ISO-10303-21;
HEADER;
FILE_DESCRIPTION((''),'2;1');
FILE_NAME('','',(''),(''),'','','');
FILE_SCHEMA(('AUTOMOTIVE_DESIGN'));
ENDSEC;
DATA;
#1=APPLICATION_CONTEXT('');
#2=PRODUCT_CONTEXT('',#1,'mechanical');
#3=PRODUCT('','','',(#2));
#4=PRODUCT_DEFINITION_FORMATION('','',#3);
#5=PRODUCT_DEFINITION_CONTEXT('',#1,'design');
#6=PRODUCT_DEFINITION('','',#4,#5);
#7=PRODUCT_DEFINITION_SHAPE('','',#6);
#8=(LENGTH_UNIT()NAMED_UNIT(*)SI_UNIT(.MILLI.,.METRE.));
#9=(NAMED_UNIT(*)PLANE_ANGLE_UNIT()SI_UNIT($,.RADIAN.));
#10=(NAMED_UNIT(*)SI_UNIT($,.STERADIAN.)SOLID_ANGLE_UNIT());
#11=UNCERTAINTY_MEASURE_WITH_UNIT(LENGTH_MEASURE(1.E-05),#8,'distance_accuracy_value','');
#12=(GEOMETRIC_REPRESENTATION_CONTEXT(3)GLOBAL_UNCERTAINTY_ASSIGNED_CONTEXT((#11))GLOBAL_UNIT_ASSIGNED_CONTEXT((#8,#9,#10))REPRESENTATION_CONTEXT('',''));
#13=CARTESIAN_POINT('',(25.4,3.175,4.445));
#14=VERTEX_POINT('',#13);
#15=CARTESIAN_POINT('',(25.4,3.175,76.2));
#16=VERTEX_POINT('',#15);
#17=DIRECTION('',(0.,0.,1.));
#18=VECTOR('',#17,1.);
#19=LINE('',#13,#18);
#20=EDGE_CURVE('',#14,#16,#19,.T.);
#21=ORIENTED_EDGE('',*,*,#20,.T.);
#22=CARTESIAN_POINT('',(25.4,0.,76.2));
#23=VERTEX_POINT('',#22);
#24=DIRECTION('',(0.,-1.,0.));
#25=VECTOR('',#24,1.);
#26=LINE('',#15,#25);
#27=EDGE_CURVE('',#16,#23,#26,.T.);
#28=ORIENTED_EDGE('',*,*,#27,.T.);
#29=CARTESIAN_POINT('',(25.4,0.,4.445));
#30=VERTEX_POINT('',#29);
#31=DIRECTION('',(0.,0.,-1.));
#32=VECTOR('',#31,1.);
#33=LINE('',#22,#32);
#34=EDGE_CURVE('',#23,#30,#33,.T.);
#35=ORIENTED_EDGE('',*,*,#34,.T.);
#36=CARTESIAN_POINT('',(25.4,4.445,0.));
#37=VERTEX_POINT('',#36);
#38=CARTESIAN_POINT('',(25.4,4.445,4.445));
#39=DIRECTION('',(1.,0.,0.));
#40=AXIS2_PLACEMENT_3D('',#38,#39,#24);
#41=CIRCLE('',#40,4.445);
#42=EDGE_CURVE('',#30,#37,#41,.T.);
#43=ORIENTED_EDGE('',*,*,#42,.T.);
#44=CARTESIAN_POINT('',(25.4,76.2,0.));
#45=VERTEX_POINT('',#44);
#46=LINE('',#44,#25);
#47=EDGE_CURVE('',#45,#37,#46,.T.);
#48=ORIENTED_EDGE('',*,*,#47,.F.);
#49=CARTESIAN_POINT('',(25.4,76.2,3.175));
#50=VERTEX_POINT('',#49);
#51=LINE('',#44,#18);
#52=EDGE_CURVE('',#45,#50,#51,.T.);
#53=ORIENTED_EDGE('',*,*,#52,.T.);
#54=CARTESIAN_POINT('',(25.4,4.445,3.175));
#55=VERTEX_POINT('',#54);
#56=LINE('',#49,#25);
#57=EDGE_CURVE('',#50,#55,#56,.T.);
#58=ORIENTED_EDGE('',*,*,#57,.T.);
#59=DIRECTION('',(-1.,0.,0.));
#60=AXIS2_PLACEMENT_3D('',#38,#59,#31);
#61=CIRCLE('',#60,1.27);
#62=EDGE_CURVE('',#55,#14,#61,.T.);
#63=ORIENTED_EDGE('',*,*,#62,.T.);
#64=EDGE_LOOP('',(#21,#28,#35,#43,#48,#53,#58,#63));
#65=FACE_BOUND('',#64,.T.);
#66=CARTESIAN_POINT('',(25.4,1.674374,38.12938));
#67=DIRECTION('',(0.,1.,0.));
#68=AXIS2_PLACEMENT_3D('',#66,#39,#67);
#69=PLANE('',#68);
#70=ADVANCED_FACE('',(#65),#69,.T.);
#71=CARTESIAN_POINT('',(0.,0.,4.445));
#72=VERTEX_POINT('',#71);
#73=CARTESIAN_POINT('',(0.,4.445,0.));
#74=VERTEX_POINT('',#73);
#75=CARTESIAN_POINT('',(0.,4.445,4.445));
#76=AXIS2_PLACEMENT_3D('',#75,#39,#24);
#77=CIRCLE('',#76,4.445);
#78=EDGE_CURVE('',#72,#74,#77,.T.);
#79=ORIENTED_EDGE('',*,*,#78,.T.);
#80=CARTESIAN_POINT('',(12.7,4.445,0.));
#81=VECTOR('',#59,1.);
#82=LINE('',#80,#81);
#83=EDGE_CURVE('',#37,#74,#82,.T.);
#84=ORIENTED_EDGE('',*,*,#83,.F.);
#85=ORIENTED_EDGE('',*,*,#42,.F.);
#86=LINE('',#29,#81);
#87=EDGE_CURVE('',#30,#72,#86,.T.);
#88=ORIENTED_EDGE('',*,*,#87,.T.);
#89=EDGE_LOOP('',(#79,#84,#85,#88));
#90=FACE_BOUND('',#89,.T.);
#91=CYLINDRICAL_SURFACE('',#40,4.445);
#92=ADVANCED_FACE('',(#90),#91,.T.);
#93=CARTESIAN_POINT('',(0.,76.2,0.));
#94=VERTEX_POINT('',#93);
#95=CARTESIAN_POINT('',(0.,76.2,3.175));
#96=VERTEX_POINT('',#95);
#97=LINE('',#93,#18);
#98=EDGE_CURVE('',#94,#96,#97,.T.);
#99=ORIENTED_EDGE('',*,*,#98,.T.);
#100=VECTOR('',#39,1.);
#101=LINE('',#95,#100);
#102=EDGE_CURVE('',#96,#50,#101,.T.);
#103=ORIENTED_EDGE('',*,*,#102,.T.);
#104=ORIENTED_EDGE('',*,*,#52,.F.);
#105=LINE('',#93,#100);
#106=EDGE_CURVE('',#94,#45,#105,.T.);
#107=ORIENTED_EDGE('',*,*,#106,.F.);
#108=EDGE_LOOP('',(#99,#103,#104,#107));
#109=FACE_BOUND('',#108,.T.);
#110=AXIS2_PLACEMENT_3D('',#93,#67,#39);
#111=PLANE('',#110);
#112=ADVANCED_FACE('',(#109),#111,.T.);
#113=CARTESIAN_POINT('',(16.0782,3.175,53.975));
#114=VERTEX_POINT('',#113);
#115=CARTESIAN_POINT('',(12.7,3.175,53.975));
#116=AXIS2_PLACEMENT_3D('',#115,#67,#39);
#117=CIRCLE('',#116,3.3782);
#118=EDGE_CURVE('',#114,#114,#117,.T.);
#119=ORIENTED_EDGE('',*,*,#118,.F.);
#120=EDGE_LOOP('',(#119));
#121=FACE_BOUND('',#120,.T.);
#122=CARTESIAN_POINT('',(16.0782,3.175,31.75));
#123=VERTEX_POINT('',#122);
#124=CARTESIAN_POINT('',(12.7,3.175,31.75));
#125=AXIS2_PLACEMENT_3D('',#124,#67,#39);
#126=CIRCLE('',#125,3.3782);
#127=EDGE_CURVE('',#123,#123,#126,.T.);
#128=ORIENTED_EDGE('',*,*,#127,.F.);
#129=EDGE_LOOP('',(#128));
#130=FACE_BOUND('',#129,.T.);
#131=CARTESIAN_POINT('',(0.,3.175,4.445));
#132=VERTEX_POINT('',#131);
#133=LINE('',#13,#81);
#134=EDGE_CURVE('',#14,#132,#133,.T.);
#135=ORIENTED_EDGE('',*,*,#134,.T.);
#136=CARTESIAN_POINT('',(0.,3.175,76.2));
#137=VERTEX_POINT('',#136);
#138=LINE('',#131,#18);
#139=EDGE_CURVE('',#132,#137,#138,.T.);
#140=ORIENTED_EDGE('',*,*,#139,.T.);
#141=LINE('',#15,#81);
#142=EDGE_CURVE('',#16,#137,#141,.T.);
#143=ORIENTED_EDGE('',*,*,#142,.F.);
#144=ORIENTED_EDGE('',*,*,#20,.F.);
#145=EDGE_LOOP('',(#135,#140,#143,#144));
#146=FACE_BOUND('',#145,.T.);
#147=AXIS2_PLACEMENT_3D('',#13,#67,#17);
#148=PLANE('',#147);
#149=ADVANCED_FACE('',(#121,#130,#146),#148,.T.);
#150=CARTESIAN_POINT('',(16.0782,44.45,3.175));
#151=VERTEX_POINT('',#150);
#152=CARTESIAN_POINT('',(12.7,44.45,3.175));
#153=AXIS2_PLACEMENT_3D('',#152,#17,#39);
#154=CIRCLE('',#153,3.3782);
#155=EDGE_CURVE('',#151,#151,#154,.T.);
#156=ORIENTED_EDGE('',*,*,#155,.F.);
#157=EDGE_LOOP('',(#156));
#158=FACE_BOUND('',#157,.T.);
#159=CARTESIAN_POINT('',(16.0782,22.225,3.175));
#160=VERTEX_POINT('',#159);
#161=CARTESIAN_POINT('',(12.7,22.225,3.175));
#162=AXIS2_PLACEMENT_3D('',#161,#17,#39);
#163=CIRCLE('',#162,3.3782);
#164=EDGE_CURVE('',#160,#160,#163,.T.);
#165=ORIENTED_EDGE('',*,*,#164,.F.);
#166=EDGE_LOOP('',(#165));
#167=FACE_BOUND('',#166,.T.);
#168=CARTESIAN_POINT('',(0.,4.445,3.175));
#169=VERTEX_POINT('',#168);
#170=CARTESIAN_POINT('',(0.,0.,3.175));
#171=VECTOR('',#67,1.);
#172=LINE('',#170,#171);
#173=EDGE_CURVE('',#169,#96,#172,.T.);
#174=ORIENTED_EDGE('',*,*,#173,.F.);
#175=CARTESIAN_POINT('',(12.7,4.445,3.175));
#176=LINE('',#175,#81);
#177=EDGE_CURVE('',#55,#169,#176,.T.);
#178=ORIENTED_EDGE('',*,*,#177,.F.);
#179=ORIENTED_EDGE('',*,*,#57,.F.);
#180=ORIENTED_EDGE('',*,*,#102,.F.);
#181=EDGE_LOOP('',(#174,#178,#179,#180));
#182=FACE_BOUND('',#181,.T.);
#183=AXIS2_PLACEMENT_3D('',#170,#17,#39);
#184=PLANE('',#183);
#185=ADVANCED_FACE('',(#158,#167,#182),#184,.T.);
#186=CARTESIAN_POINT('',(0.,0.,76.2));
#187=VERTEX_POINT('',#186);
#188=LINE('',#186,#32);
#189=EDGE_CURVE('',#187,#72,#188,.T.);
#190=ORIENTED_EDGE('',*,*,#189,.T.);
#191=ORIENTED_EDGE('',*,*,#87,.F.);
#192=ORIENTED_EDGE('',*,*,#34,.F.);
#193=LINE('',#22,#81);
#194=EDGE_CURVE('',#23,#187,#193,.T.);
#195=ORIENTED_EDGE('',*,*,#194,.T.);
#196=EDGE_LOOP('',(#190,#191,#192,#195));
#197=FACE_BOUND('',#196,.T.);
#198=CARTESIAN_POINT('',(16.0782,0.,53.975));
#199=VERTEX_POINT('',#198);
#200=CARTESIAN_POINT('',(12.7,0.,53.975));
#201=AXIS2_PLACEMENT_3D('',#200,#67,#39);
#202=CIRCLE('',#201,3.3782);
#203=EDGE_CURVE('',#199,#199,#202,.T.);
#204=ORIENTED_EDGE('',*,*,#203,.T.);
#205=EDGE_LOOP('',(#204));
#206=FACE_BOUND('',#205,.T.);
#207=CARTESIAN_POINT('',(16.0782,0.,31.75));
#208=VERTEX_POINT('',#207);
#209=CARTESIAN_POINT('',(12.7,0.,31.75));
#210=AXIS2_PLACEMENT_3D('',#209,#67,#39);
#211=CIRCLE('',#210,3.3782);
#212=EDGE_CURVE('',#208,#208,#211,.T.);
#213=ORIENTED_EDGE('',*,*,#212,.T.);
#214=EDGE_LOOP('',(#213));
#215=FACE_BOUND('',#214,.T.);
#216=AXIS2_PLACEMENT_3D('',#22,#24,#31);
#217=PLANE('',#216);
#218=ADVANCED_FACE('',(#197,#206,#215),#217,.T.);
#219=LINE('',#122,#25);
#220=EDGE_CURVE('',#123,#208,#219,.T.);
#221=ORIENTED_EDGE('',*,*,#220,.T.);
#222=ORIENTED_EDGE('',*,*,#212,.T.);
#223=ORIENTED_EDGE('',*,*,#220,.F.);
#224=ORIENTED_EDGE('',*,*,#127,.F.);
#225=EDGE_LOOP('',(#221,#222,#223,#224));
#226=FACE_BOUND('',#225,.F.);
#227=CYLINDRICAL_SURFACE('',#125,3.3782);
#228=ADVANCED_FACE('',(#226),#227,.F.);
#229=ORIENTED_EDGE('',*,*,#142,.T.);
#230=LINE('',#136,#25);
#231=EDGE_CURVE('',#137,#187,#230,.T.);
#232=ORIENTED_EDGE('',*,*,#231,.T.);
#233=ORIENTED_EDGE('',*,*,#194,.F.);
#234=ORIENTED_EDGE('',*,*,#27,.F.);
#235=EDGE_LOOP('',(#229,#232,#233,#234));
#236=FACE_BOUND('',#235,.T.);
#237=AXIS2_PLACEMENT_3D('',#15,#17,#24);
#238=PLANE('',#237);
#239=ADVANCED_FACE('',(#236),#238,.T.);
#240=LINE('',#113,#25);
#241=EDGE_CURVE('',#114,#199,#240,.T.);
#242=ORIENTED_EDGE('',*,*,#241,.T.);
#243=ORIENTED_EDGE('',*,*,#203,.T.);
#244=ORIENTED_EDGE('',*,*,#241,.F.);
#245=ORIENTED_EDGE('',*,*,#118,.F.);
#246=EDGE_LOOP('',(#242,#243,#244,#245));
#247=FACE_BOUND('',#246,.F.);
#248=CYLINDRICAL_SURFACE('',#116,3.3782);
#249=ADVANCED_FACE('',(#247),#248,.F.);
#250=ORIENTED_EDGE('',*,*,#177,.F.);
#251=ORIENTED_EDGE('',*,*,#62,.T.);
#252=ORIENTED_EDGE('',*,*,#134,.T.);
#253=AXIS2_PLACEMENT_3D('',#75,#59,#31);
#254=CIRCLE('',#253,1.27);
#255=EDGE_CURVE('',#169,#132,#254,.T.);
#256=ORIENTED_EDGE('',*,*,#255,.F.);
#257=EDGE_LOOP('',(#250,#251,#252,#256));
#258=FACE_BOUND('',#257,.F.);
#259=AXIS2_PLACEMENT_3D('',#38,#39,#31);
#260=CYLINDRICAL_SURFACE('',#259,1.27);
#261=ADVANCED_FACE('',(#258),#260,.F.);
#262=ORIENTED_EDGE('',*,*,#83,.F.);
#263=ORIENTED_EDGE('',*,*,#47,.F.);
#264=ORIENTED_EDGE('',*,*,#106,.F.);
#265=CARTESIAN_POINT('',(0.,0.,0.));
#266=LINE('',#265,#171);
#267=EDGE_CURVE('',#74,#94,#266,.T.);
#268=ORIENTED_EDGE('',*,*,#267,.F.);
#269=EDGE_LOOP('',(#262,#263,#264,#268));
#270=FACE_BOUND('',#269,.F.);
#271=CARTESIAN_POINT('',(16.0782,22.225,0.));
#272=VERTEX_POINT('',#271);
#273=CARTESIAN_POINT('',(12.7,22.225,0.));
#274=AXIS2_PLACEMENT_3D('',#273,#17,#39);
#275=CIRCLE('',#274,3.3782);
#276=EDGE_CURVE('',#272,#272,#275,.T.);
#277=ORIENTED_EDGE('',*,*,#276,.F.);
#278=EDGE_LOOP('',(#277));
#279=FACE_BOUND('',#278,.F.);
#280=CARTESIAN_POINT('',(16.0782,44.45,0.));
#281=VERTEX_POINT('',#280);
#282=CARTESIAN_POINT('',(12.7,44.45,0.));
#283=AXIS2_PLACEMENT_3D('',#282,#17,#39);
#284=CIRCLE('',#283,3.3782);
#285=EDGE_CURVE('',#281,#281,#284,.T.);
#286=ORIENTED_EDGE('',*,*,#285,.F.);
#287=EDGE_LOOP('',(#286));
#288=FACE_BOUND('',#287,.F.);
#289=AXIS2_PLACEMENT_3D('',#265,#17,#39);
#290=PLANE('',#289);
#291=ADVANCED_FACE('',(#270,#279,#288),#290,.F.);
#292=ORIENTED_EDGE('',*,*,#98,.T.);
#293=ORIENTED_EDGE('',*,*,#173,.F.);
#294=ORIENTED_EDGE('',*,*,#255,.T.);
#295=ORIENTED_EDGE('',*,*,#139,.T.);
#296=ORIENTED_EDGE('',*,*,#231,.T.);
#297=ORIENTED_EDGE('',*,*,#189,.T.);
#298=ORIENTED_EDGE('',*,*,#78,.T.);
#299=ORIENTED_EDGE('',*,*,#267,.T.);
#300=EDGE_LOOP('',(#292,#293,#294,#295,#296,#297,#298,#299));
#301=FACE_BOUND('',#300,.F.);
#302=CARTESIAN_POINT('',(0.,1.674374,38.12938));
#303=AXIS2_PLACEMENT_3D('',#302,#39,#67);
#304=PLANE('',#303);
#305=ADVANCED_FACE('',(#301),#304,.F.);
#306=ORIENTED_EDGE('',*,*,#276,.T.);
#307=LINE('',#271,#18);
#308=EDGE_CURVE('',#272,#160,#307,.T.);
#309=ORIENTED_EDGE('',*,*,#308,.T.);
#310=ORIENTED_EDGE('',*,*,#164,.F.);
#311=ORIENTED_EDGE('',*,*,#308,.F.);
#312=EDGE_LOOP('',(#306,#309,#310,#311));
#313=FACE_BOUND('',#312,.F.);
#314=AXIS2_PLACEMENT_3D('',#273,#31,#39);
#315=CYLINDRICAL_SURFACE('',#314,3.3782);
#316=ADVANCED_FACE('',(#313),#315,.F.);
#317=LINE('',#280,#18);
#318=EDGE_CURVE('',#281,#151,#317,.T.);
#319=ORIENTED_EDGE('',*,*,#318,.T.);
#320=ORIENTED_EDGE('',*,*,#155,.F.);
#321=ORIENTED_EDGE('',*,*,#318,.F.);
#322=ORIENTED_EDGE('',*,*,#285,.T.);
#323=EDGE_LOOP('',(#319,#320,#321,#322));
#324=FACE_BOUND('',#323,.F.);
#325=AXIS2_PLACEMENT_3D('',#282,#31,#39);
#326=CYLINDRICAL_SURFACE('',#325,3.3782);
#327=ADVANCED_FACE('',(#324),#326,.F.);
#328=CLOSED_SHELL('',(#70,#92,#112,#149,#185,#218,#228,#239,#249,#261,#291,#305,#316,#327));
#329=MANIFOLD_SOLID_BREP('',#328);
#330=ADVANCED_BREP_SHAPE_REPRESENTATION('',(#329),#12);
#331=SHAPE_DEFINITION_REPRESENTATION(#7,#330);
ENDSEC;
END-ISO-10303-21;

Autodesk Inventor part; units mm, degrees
ref_plane "YZ Plane" through (0, 0, 0) normal (1, 0, 0) x (0, 1, 0)
ref_plane "XZ Plane" through (0, 0, 0) normal (0, 1, 0) x (-1, 0, 0)
ref_plane "XY Plane" through (0, 0, 0) normal (0, 0, 1) x (1, 0, 0)
sketch "Sketch1" plane through (0, 0, 0) normal (0, 0, 1) x (1, 0, 0)
  line L0 (0, 0) -> (147.699314, 0)
  line L1 (147.699314, -25.4) -> (0, -25.4)
  line L2 (0, 0) -> (73.849657, 0)
  line L3 (73.849657, 0) -> (73.849657, -3.175)
  line L4 (73.849657, -3.175) -> (72.249457, -3.175)
  line L5 (72.249457, -3.175) -> (72.249457, -9.525)
  line L6 (72.249457, -9.525) -> (75.424457, -9.525)
  line L7 (75.424457, -9.525) -> (75.424457, -3.175)
  line L8 (75.424457, -3.175) -> (73.849657, -3.175)
  line L9 (73.849657, -25.4) -> (73.849657, -22.225)
  line L10 (73.849657, -22.225) -> (72.249457, -22.225)
  line L11 (72.249457, -22.225) -> (72.249457, -15.875)
  line L12 (72.249457, -15.875) -> (75.424457, -15.875)
  line L13 (75.424457, -15.875) -> (75.424457, -22.225)
  line L14 (75.424457, -22.225) -> (73.849657, -22.225)
  dimension "d8" = 6.7564
sketch "Sketch3" plane through (0, 3.175, 76.2) normal (0, 1, 0) x (1, 0, 0)
  line L0 (0, 0) -> (25.4, 0) projected
  circle A0 centre (12.7, 44.45) radius 3.3782
  circle A1 centre (12.7, 22.225) radius 3.3782
  line L1 (0, 76.2) -> (0, 73.025) projected
  dimension "d21" = 6.7564
  dimension "d22" = 6.7564
  dimension "d23" = 12.7
  dimension "d24" = 22.225
  dimension "d25" = 22.225
sketch "Sketch1 outline for Plate1" plane through (0, 0, 0) normal (0, 0, 1) x (1, 0, 0)
  line L0 (0, 0) -> (0, 76.2)
  line L1 (25.4, 0) -> (0, 0)
  line L2 (0, 76.2) -> (25.4, 76.2)
  line L3 (25.4, 76.2) -> (25.4, 0)
  circle A0 centre (12.7, 22.225) radius 3.3782
  circle A1 centre (12.7, 44.45) radius 3.3782
extrude "Plate1" add sketch "Sketch1 outline for Plate1" along normal blind 3.175
sketch "Sketch2" plane through (25.4, 3.175, 0) normal (0, -1, 0) x (1, 0, 0)
  line L0 (-25.4, 0) -> (0, 0)
  line L1 (0, 0) -> (0, 76.2)
  line L2 (0, 76.2) -> (-25.4, 76.2)
  line L3 (-25.4, 76.2) -> (-25.4, 0)
edge flange "Flange1" height 76.2 angle 90 thickness 3.175 bend radius 1.27 thickness toward (0, -1, 0) relief tear relief width 3.175 relief depth 1.5875 edges at (12.7, 0, 3.175) wall of the first edge with corners at (0, 3.175, 0) (25.4, 3.175, 0) (25.4, 3.175, 76.2) (0, 3.175, 76.2)
bend "Bend1"
corner "Corner1"
extrude "Cut1" cut sketch "Sketch3" against normal blind 3.175
equation "\"d11\" = BendReliefWidth"
equation "\"d12\" = BendReliefDepth"
equation "\"d13\" = MinimumRemnant"
equation "\"d14\" = BendRadius"
equation "\"d18\" = CornerReliefSize"
equation "\"d19\" = GapSize"
equation "\"d20\" = JacobiRadiusSize"
equation "\"BendRadius\" = Thickness"
equation "\"BendReliefWidth\" = Thickness"
equation "\"BendReliefDepth\" = 0.5 * Thickness"
equation "\"CornerReliefSize\" = 4 * Thickness"
equation "\"MinimumRemnant\" = 2 * Thickness"
equation "\"TransitionRadius\" = BendRadius"
equation "\"JacobiRadiusSize\" = BendRadius"
equation "\"GapSize\" = Thickness"
equation "\"d10\" = BendRadius"
equation "\"d6\" = Thickness"
equation "\"Thickness\" = 3.175"
properties part number "Rebuild Gusset 4" material "Aluminum 6061"
